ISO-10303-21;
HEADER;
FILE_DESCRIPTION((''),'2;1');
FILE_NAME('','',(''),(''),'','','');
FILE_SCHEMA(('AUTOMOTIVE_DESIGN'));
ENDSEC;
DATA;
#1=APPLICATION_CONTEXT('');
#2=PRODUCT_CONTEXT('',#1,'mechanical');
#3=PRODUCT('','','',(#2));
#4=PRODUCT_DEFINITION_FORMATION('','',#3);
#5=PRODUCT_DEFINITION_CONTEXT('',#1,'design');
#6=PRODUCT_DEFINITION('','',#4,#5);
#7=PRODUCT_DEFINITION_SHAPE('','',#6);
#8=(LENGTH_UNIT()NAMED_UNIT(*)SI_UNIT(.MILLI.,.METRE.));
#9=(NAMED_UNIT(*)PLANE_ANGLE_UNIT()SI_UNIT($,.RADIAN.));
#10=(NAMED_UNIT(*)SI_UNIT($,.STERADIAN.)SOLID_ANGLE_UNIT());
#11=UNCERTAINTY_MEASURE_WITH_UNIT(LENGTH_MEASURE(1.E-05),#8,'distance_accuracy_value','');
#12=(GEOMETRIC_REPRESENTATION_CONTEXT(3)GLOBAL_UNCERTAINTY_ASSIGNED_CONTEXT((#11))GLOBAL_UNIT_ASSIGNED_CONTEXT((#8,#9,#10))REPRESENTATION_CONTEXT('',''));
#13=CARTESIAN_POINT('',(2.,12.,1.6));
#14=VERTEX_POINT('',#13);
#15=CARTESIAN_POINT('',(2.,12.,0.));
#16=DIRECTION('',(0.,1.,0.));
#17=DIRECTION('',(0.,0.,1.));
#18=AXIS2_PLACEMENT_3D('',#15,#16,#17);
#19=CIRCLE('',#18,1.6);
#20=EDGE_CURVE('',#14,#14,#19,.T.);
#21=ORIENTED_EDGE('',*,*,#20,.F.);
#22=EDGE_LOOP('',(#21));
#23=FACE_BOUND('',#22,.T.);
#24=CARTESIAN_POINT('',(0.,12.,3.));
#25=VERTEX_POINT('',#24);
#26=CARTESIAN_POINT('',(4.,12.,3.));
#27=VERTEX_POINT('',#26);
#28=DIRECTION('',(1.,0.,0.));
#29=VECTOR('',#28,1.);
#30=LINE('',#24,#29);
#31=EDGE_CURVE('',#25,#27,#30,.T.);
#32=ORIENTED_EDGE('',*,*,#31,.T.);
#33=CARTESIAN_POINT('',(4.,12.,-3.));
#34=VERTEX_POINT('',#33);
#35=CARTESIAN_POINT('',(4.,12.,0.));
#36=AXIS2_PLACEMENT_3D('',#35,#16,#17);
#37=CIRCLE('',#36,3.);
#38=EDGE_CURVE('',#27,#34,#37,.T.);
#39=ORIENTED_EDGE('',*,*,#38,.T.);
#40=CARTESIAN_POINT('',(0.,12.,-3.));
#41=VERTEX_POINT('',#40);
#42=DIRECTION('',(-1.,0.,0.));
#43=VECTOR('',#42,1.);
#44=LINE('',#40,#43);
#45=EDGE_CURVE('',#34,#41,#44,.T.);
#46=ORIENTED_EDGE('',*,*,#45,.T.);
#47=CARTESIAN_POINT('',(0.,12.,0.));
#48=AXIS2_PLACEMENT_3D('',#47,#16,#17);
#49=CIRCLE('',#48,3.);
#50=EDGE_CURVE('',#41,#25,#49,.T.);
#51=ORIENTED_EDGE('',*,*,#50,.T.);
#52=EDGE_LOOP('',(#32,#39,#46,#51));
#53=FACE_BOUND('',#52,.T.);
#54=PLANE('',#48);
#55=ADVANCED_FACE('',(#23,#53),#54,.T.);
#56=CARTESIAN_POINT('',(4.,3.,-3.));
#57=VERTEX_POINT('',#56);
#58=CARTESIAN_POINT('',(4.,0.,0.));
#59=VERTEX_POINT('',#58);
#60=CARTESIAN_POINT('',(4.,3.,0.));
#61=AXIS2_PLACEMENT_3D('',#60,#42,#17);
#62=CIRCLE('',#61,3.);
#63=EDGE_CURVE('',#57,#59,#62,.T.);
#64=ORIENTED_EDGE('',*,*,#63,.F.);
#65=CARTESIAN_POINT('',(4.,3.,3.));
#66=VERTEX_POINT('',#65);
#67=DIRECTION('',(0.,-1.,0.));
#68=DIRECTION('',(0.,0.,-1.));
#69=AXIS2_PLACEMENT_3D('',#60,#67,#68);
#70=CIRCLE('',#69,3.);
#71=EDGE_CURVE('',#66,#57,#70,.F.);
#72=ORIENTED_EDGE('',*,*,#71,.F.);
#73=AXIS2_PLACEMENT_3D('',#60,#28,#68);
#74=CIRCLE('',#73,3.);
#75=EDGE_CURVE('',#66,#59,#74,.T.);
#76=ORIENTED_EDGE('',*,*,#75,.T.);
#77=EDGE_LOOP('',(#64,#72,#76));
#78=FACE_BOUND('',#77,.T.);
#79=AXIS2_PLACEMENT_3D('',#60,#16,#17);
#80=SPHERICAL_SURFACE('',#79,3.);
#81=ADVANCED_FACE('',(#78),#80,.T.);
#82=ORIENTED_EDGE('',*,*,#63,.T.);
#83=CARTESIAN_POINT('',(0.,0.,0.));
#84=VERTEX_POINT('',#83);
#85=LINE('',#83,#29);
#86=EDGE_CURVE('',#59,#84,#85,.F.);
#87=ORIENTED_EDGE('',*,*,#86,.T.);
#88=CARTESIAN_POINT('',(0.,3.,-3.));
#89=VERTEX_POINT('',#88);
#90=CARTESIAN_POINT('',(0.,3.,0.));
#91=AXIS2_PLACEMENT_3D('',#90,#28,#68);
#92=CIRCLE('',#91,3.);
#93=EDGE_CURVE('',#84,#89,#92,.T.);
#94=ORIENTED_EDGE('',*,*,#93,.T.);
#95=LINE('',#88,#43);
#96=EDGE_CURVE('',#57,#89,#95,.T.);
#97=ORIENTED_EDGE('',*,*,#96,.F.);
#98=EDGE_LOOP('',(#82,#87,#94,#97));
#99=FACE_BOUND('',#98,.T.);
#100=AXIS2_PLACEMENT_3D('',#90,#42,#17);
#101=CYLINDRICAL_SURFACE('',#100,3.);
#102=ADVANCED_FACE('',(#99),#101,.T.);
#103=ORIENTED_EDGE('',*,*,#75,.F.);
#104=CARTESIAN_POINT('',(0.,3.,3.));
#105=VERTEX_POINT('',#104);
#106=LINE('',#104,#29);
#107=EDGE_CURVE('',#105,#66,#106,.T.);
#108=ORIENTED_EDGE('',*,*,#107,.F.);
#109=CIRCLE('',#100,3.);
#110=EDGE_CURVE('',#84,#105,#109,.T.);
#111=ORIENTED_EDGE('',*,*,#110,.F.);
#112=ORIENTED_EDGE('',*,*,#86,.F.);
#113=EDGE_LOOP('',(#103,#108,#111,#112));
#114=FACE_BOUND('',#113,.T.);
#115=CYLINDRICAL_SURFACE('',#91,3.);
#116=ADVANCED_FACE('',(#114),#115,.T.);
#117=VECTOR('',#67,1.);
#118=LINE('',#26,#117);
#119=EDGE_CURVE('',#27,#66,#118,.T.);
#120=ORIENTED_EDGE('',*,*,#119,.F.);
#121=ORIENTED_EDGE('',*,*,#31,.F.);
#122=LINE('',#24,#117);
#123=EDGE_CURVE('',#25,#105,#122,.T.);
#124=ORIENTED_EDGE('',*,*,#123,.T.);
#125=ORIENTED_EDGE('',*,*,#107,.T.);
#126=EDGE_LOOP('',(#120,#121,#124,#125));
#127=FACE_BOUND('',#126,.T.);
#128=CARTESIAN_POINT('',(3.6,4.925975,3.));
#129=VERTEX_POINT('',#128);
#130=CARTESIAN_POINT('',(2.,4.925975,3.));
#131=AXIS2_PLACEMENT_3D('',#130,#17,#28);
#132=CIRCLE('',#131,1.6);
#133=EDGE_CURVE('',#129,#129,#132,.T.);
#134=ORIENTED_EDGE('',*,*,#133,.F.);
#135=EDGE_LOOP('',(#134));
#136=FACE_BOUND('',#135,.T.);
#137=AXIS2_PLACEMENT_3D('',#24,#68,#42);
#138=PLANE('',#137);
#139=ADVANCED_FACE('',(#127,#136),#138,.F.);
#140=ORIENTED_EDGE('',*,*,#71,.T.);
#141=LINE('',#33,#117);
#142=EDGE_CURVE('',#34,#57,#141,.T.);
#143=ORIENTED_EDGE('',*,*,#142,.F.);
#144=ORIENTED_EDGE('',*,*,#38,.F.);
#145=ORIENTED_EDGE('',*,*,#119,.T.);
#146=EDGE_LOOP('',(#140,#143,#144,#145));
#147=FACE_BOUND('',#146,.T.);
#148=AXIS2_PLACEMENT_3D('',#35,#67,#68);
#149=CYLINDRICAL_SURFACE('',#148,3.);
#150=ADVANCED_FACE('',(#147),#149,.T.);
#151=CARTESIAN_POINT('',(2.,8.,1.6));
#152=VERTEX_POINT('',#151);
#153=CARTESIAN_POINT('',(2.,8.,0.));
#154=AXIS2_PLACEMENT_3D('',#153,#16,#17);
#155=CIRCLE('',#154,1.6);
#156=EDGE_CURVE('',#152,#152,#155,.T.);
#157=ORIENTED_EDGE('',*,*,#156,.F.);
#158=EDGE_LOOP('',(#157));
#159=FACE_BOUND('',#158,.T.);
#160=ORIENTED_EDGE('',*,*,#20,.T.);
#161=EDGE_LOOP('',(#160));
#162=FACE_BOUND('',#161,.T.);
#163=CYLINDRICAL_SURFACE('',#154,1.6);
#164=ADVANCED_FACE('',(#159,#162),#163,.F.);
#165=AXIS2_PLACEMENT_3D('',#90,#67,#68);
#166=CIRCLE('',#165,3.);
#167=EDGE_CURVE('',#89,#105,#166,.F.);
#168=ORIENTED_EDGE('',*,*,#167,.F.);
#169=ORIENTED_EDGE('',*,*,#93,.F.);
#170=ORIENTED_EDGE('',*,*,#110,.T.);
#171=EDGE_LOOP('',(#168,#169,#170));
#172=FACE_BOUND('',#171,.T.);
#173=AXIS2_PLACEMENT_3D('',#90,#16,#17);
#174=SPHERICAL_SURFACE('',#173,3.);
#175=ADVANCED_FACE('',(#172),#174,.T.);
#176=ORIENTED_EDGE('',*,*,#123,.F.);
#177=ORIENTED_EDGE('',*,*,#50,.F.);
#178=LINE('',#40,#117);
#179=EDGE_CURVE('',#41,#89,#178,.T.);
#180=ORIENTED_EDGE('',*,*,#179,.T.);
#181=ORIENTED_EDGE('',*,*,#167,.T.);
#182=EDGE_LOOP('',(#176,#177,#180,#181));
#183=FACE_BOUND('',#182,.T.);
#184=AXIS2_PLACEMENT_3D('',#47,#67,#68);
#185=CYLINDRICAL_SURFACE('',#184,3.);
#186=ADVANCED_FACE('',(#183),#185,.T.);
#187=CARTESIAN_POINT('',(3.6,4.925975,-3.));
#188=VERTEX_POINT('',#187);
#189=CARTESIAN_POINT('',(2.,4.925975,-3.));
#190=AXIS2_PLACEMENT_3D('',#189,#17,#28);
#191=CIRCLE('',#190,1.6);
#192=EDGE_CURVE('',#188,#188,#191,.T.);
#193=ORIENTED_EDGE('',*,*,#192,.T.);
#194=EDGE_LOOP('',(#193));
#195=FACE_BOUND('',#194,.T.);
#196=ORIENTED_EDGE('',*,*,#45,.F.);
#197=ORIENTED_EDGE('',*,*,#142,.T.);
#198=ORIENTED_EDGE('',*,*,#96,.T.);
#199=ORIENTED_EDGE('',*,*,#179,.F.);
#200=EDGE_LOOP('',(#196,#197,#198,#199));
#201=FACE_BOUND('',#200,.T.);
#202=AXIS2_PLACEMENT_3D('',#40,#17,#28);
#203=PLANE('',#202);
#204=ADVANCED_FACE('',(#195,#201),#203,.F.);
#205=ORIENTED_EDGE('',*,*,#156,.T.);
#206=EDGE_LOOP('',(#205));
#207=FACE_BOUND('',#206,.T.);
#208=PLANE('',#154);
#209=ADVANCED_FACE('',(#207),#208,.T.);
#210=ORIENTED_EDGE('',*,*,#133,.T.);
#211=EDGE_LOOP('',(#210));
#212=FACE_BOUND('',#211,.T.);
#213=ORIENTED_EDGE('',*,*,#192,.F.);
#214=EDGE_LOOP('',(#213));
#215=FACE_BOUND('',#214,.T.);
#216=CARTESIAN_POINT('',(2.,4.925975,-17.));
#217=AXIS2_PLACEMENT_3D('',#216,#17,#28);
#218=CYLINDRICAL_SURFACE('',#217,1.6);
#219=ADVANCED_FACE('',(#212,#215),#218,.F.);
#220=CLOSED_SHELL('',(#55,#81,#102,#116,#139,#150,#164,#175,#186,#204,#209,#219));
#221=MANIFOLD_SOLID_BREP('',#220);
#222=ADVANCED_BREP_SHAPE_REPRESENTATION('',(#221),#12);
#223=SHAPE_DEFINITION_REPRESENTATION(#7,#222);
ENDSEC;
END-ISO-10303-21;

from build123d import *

# Parameters (mm, degrees)
BOSS_EXTRUDE1_DEPTH = 12
FILLET3_R           = 3
SKETCH2_R           = 1.6
CUT_EXTRUDE1_DEPTH  = 20
SKETCH4_R           = 1.6
CUT_EXTRUDE2_DEPTH  = 4


with BuildPart() as part:
    # Sketch1 → Boss-Extrude1 (new body)
    with BuildSketch(Plane(origin=(0, 0, 0), x_dir=(1, 0, 0), z_dir=(0, 1, 0))):
        with BuildLine():
            Line((0, 3), (4, 3))
            ThreePointArc((4, 3), (7, 0), (4, -3))
            Line((4, -3), (0, -3))
            ThreePointArc((0, -3), (-3, 0), (0, 3))
        make_face()
    extrude(amount=BOSS_EXTRUDE1_DEPTH)

    # Fillet3
    fillet3_edges = [part.edges().sort_by_distance(p)[0] for p in [
        (2, 0, -3),
        (7, 0, 0),
        (2, 0, 3),
        (-3, 0, 0),
    ]]
    fillet(fillet3_edges, radius=FILLET3_R - 0.0001)  # a hair under: the kernel refuses the full size

    # Sketch2 → Cut-Extrude1 (cut)
    with BuildSketch(Plane.XY.offset(3)):
        with Locations((2, 4.925974627)):
            Circle(SKETCH2_R)
    extrude(amount=-CUT_EXTRUDE1_DEPTH, mode=Mode.SUBTRACT)

    # Sketch4 → Cut-Extrude2 (cut)
    with BuildSketch(Plane(origin=(0, 12, 0), x_dir=(1, 0, 0), z_dir=(0, 1, 0))):
        with Locations(Location((2, 0, 0), (0, 0, 270))):
            Circle(SKETCH4_R)
    extrude(amount=-CUT_EXTRUDE2_DEPTH, mode=Mode.SUBTRACT)


solid = part.part
